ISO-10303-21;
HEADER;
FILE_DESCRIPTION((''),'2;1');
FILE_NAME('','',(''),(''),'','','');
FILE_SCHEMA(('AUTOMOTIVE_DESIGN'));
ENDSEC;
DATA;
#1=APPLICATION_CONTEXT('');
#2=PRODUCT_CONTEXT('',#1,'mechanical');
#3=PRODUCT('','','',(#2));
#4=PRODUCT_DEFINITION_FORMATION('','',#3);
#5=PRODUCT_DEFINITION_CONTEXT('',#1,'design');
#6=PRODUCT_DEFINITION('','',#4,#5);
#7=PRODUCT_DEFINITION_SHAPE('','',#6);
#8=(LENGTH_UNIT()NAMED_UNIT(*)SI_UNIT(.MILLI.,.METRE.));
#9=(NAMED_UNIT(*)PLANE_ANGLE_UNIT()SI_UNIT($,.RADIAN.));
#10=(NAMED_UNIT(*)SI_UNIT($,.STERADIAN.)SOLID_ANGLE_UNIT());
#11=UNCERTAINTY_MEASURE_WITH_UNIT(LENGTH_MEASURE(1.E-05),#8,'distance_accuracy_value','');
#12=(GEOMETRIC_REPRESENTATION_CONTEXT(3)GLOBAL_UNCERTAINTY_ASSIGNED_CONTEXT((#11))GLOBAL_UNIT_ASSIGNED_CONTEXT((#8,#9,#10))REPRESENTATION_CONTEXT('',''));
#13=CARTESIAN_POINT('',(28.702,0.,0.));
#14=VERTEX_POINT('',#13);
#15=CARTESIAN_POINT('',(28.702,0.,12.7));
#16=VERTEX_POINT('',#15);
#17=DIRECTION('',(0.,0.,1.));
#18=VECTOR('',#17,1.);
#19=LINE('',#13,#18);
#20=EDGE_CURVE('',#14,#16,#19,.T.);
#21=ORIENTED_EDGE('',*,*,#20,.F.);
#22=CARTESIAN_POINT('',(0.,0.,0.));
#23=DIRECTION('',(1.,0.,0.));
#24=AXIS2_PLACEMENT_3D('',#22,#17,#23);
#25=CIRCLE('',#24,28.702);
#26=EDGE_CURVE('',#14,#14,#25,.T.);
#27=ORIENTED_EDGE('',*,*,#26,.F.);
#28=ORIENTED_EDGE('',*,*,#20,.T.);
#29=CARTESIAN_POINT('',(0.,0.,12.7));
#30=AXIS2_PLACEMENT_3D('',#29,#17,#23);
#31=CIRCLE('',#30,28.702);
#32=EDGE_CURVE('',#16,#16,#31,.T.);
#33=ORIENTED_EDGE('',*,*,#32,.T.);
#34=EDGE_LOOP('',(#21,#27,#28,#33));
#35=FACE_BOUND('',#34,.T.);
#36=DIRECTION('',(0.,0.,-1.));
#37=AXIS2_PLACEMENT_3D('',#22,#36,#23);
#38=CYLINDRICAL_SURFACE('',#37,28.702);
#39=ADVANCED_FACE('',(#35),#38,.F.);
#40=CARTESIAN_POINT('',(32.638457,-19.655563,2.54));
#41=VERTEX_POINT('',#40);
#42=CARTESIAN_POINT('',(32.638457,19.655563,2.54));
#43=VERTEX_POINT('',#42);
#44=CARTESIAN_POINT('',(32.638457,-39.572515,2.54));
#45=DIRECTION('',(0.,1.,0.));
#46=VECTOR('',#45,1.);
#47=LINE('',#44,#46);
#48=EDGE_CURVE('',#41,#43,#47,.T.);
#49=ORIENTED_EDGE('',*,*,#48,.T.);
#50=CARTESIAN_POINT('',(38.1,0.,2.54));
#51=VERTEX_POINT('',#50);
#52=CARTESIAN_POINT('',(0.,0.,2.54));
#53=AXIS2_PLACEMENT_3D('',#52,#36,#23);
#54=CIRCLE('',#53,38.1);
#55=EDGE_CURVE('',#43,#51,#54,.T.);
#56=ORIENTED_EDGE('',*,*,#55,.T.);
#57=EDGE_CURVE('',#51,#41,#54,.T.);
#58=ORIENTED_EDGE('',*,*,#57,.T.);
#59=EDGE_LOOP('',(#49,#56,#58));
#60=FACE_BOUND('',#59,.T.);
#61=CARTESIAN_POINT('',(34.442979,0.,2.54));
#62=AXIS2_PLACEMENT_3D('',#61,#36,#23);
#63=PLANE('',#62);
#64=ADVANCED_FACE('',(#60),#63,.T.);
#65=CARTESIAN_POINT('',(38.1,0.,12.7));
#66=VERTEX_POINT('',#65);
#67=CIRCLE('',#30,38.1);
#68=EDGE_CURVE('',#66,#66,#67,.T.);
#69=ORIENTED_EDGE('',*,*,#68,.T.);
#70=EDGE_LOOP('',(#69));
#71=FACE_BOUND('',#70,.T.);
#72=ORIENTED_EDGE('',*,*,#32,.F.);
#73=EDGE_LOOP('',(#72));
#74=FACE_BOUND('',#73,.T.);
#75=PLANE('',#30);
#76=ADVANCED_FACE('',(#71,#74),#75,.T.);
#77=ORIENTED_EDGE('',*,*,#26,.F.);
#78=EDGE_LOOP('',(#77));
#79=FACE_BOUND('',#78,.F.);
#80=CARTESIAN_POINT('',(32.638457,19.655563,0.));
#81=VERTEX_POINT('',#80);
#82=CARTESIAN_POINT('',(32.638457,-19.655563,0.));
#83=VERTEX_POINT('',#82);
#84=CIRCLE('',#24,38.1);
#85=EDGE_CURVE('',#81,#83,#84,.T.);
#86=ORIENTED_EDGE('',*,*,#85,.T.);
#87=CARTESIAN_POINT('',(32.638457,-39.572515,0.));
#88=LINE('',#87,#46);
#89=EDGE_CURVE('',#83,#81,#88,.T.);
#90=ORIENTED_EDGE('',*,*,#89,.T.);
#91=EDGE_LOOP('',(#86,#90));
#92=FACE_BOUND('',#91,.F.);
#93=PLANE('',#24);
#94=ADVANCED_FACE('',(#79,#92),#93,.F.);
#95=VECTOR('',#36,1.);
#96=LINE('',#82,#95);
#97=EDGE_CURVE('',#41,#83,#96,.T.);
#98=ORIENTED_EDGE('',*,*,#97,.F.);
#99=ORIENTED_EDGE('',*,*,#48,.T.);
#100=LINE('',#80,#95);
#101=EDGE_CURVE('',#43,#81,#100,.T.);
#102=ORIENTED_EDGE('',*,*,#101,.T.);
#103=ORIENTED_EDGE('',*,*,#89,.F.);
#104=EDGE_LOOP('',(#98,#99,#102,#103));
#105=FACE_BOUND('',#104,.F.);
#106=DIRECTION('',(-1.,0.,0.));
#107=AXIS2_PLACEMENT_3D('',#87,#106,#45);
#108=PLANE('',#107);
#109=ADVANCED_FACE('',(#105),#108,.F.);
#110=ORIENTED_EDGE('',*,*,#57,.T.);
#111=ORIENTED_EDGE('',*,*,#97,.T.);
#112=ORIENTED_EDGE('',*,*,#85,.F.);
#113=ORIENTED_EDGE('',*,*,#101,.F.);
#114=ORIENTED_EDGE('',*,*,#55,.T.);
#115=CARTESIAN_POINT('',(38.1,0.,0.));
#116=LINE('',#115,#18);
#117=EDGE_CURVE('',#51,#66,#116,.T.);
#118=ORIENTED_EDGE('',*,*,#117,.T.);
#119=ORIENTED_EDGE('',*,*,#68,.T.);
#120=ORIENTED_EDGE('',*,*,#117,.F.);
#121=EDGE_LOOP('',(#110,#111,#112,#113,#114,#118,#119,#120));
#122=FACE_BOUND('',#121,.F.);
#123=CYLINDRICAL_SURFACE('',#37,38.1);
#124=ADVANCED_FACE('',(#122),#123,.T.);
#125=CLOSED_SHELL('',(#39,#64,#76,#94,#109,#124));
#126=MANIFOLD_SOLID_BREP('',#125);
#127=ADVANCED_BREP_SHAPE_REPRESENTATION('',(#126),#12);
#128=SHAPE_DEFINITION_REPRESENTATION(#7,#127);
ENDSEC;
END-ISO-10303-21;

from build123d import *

# Parameters (mm, degrees)
F0_R     = 38.1
F0_R_2   = 28.702
F1_DEPTH = 12.7
F3_DEPTH = 2.54


with BuildPart() as f1:
    # F0 (on Top) → F1 (new body)
    with BuildSketch(Plane.XY):
        Circle(F0_R)
        Circle(F0_R_2, mode=Mode.SUBTRACT)
    extrude(amount=F1_DEPTH)

    # F2 (on face) → F3 (cut)
    with BuildSketch(Plane(origin=(0, 0, 0), x_dir=(1, 0, 0), z_dir=(0, 0, -1))):
        with BuildLine():
            ThreePointArc((38.1, 0), (36.7092304415, 10.2001176655), (32.6384566724, 19.6555627251))
            Line((32.6384566724, 19.6555627251), (32.6384566724, -19.6555627251))
            ThreePointArc((32.6384566724, -19.6555627251), (36.7092304415, -10.2001176655), (38.1, 0))
        make_face()
        with BuildLine():
            Line((45.6830970943, -36.9560495019), (45.6830970943, 39.5725145936))
            Line((45.6830970943, 39.5725145936), (32.6384566724, 39.5725145936))
            Line((32.6384566724, 39.5725145936), (32.6384566724, 19.6555627251))
            ThreePointArc((32.6384566724, 19.6555627251), (36.7092304415, 10.2001176655), (38.1, 0))
            ThreePointArc((38.1, 0), (36.7092304415, -10.2001176655), (32.6384566724, -19.6555627251))
            Line((32.6384566724, -19.6555627251), (32.6384566724, -36.9560495019))
            Line((32.6384566724, -36.9560495019), (45.6830970943, -36.9560495019))
        make_face()
    extrude(amount=-F3_DEPTH, mode=Mode.SUBTRACT)


solid = f1.part
